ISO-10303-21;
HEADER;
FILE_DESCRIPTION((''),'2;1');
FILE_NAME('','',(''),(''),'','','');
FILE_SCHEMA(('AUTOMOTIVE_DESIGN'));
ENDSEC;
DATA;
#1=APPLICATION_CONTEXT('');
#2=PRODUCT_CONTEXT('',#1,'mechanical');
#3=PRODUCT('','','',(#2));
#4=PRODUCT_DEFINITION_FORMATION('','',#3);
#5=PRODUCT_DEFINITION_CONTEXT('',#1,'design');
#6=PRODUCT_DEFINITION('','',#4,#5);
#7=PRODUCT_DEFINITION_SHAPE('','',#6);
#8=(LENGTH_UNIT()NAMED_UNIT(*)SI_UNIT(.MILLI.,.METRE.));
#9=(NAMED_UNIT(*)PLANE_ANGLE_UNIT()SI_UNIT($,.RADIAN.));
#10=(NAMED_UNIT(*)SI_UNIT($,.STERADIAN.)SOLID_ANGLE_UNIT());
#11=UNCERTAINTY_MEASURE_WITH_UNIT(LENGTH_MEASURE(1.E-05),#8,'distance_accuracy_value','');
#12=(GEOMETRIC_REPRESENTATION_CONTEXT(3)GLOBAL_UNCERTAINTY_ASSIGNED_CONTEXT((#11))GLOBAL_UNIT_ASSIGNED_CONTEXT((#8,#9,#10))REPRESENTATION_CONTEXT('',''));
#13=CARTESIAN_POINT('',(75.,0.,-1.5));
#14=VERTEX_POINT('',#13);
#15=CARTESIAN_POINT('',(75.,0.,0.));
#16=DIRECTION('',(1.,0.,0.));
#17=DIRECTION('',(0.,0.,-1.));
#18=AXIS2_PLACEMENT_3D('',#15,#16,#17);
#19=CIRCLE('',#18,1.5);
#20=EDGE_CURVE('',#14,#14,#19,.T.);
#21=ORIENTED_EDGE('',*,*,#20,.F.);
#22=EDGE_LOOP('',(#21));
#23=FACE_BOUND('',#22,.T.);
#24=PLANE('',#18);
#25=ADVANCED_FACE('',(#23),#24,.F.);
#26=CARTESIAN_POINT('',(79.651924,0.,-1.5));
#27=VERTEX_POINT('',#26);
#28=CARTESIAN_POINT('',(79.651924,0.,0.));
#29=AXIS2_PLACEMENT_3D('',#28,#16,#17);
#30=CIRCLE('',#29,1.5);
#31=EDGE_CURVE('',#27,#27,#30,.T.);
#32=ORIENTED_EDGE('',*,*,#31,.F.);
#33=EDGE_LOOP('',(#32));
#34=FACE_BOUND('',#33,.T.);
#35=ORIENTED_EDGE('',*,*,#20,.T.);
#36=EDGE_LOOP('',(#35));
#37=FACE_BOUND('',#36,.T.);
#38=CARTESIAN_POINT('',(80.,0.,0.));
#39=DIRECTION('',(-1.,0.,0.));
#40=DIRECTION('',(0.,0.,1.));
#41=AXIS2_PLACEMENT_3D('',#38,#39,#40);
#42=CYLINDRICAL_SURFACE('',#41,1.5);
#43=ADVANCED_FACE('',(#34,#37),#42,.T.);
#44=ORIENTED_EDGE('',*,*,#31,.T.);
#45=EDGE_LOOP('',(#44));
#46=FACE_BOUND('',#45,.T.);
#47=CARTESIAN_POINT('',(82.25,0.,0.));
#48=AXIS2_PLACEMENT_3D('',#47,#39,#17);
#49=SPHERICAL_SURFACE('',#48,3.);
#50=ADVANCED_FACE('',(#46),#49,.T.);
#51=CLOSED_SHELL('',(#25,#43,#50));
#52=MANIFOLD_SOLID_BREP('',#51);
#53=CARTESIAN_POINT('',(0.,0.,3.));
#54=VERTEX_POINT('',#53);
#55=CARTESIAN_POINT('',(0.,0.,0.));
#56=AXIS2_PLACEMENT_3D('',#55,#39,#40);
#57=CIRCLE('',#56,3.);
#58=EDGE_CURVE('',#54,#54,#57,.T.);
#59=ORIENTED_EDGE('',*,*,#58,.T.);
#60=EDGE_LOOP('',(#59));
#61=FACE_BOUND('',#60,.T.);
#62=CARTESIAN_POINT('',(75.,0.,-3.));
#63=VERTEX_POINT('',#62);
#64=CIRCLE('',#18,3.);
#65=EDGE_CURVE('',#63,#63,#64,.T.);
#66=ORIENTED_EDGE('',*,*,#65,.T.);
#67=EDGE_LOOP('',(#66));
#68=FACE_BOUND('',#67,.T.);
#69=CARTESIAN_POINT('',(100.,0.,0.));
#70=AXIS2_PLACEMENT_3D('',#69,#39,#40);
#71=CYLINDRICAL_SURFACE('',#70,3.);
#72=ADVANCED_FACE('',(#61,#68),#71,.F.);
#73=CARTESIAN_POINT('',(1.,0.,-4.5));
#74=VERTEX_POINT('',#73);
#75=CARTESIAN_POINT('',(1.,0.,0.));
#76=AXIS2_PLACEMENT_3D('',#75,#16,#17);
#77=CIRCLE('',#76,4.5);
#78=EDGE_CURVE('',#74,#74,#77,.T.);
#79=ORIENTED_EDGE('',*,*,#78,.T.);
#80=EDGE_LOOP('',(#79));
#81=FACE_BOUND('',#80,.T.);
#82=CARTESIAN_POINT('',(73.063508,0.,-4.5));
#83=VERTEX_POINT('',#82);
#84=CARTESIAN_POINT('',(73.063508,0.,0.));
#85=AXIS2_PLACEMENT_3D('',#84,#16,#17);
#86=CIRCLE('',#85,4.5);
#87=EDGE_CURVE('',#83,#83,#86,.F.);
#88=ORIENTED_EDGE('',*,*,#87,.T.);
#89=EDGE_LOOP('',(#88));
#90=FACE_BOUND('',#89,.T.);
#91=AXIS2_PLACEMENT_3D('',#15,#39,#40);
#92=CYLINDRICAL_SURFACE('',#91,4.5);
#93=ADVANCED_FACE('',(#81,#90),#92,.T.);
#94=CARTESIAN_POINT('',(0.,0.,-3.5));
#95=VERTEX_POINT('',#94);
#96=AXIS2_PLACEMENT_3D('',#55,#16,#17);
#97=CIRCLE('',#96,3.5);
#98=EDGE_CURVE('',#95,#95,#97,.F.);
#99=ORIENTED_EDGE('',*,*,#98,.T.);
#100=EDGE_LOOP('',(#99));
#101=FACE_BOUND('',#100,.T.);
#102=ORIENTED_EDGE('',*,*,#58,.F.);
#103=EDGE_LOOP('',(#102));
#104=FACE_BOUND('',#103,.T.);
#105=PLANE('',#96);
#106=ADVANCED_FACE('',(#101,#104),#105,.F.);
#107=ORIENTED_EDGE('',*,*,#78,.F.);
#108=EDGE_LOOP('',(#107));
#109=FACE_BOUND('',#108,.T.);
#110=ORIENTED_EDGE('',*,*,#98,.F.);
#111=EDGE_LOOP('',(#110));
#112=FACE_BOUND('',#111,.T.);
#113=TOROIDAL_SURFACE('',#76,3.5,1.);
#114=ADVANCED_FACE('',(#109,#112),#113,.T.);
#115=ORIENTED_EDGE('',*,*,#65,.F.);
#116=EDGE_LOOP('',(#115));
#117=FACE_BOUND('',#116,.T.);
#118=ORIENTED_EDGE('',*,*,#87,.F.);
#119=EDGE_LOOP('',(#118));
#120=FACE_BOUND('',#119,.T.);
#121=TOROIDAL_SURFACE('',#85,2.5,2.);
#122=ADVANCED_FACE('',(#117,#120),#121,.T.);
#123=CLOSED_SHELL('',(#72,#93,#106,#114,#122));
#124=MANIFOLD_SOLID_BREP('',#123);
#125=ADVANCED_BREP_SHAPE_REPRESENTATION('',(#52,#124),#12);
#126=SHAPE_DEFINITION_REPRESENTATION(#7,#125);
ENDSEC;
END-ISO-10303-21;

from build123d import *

# Parameters (mm, degrees)
SKETCH2_R           = 4.5
BOSS_EXTRUDE1_DEPTH = 75
SKETCH3_R           = 3
CUT_EXTRUDE1_DEPTH  = 100
SKETCH4_R           = 1.5
BOSS_EXTRUDE2_DEPTH = 5
FILLET1_R           = 2
FILLET3_R           = 1


with BuildPart() as part:
    # Sketch2 → Boss-Extrude1 (new body)
    with BuildSketch(Plane(origin=(0, 0, 0), x_dir=(0, 0, -1), z_dir=(1, 0, 0))):
        Circle(SKETCH2_R)
    extrude(amount=BOSS_EXTRUDE1_DEPTH)

    # Sketch3 → Cut-Extrude1 (cut)
    with BuildSketch(Plane.ZY):
        Circle(SKETCH3_R)
    extrude(amount=-CUT_EXTRUDE1_DEPTH, mode=Mode.SUBTRACT)

    # Fillet1
    # the kernel refuses this fillet: 2 mm, written as the material it takes off along each edge
    with BuildSketch(Plane(origin=(75, 0, 0), x_dir=(0, 0, -1), z_dir=(0, -1, 0))) as fillet1_piece_1:
        with BuildLine():
            CenterArc((2.5, -1.936491673), FILLET1_R, 0, 75.522487814)
            Line((3, 0), (3.01, 0.038729833))
            ThreePointArc((3.01, 0.038729833), (3.75, 0.04), (4.5, 0.04))
            Line((4.5, 0.04), (4.54, 0))
            Line((4.54, 0), (4.54, -1.936491673))
            Line((4.54, -1.936491673), (4.5, -1.936491673))
        make_face()
    revolve(axis=Axis((75, 0, 0), (1, 0, 0)), mode=Mode.SUBTRACT)

    # Fillet3
    fillet3_edges = [part.edges().sort_by_distance(p)[0] for p in [
        (0, 0, 4.5),
    ]]
    fillet(fillet3_edges, radius=FILLET3_R)


with BuildPart() as body_2:
    # Sketch4 → Boss-Extrude2 (new body)
    with BuildSketch(Plane(origin=(75, 0, 0), x_dir=(0, 0, -1), z_dir=(1, 0, 0))):
        Circle(SKETCH4_R)
    extrude(amount=BOSS_EXTRUDE2_DEPTH)

    # Sketch5 → Revolve1 (revolve)
    with BuildSketch(Plane(origin=(0, 0, 0), x_dir=(1, 0, 0), z_dir=(0, 1, 0))):
        with BuildLine():
            Line((80, 0), (82.25, 0))
            Line((82.25, 0), (85.25, 0))
            ThreePointArc((85.25, 0), (82.25, 3), (79.25, 0))
            Line((79.25, 0), (79.5, 0))
            Line((79.5, 0), (80, 0))
        make_face()
    revolve(axis=Axis((82.25, 0, 0), (1, 0, 0)))


solid = Compound([part.part, body_2.part])
